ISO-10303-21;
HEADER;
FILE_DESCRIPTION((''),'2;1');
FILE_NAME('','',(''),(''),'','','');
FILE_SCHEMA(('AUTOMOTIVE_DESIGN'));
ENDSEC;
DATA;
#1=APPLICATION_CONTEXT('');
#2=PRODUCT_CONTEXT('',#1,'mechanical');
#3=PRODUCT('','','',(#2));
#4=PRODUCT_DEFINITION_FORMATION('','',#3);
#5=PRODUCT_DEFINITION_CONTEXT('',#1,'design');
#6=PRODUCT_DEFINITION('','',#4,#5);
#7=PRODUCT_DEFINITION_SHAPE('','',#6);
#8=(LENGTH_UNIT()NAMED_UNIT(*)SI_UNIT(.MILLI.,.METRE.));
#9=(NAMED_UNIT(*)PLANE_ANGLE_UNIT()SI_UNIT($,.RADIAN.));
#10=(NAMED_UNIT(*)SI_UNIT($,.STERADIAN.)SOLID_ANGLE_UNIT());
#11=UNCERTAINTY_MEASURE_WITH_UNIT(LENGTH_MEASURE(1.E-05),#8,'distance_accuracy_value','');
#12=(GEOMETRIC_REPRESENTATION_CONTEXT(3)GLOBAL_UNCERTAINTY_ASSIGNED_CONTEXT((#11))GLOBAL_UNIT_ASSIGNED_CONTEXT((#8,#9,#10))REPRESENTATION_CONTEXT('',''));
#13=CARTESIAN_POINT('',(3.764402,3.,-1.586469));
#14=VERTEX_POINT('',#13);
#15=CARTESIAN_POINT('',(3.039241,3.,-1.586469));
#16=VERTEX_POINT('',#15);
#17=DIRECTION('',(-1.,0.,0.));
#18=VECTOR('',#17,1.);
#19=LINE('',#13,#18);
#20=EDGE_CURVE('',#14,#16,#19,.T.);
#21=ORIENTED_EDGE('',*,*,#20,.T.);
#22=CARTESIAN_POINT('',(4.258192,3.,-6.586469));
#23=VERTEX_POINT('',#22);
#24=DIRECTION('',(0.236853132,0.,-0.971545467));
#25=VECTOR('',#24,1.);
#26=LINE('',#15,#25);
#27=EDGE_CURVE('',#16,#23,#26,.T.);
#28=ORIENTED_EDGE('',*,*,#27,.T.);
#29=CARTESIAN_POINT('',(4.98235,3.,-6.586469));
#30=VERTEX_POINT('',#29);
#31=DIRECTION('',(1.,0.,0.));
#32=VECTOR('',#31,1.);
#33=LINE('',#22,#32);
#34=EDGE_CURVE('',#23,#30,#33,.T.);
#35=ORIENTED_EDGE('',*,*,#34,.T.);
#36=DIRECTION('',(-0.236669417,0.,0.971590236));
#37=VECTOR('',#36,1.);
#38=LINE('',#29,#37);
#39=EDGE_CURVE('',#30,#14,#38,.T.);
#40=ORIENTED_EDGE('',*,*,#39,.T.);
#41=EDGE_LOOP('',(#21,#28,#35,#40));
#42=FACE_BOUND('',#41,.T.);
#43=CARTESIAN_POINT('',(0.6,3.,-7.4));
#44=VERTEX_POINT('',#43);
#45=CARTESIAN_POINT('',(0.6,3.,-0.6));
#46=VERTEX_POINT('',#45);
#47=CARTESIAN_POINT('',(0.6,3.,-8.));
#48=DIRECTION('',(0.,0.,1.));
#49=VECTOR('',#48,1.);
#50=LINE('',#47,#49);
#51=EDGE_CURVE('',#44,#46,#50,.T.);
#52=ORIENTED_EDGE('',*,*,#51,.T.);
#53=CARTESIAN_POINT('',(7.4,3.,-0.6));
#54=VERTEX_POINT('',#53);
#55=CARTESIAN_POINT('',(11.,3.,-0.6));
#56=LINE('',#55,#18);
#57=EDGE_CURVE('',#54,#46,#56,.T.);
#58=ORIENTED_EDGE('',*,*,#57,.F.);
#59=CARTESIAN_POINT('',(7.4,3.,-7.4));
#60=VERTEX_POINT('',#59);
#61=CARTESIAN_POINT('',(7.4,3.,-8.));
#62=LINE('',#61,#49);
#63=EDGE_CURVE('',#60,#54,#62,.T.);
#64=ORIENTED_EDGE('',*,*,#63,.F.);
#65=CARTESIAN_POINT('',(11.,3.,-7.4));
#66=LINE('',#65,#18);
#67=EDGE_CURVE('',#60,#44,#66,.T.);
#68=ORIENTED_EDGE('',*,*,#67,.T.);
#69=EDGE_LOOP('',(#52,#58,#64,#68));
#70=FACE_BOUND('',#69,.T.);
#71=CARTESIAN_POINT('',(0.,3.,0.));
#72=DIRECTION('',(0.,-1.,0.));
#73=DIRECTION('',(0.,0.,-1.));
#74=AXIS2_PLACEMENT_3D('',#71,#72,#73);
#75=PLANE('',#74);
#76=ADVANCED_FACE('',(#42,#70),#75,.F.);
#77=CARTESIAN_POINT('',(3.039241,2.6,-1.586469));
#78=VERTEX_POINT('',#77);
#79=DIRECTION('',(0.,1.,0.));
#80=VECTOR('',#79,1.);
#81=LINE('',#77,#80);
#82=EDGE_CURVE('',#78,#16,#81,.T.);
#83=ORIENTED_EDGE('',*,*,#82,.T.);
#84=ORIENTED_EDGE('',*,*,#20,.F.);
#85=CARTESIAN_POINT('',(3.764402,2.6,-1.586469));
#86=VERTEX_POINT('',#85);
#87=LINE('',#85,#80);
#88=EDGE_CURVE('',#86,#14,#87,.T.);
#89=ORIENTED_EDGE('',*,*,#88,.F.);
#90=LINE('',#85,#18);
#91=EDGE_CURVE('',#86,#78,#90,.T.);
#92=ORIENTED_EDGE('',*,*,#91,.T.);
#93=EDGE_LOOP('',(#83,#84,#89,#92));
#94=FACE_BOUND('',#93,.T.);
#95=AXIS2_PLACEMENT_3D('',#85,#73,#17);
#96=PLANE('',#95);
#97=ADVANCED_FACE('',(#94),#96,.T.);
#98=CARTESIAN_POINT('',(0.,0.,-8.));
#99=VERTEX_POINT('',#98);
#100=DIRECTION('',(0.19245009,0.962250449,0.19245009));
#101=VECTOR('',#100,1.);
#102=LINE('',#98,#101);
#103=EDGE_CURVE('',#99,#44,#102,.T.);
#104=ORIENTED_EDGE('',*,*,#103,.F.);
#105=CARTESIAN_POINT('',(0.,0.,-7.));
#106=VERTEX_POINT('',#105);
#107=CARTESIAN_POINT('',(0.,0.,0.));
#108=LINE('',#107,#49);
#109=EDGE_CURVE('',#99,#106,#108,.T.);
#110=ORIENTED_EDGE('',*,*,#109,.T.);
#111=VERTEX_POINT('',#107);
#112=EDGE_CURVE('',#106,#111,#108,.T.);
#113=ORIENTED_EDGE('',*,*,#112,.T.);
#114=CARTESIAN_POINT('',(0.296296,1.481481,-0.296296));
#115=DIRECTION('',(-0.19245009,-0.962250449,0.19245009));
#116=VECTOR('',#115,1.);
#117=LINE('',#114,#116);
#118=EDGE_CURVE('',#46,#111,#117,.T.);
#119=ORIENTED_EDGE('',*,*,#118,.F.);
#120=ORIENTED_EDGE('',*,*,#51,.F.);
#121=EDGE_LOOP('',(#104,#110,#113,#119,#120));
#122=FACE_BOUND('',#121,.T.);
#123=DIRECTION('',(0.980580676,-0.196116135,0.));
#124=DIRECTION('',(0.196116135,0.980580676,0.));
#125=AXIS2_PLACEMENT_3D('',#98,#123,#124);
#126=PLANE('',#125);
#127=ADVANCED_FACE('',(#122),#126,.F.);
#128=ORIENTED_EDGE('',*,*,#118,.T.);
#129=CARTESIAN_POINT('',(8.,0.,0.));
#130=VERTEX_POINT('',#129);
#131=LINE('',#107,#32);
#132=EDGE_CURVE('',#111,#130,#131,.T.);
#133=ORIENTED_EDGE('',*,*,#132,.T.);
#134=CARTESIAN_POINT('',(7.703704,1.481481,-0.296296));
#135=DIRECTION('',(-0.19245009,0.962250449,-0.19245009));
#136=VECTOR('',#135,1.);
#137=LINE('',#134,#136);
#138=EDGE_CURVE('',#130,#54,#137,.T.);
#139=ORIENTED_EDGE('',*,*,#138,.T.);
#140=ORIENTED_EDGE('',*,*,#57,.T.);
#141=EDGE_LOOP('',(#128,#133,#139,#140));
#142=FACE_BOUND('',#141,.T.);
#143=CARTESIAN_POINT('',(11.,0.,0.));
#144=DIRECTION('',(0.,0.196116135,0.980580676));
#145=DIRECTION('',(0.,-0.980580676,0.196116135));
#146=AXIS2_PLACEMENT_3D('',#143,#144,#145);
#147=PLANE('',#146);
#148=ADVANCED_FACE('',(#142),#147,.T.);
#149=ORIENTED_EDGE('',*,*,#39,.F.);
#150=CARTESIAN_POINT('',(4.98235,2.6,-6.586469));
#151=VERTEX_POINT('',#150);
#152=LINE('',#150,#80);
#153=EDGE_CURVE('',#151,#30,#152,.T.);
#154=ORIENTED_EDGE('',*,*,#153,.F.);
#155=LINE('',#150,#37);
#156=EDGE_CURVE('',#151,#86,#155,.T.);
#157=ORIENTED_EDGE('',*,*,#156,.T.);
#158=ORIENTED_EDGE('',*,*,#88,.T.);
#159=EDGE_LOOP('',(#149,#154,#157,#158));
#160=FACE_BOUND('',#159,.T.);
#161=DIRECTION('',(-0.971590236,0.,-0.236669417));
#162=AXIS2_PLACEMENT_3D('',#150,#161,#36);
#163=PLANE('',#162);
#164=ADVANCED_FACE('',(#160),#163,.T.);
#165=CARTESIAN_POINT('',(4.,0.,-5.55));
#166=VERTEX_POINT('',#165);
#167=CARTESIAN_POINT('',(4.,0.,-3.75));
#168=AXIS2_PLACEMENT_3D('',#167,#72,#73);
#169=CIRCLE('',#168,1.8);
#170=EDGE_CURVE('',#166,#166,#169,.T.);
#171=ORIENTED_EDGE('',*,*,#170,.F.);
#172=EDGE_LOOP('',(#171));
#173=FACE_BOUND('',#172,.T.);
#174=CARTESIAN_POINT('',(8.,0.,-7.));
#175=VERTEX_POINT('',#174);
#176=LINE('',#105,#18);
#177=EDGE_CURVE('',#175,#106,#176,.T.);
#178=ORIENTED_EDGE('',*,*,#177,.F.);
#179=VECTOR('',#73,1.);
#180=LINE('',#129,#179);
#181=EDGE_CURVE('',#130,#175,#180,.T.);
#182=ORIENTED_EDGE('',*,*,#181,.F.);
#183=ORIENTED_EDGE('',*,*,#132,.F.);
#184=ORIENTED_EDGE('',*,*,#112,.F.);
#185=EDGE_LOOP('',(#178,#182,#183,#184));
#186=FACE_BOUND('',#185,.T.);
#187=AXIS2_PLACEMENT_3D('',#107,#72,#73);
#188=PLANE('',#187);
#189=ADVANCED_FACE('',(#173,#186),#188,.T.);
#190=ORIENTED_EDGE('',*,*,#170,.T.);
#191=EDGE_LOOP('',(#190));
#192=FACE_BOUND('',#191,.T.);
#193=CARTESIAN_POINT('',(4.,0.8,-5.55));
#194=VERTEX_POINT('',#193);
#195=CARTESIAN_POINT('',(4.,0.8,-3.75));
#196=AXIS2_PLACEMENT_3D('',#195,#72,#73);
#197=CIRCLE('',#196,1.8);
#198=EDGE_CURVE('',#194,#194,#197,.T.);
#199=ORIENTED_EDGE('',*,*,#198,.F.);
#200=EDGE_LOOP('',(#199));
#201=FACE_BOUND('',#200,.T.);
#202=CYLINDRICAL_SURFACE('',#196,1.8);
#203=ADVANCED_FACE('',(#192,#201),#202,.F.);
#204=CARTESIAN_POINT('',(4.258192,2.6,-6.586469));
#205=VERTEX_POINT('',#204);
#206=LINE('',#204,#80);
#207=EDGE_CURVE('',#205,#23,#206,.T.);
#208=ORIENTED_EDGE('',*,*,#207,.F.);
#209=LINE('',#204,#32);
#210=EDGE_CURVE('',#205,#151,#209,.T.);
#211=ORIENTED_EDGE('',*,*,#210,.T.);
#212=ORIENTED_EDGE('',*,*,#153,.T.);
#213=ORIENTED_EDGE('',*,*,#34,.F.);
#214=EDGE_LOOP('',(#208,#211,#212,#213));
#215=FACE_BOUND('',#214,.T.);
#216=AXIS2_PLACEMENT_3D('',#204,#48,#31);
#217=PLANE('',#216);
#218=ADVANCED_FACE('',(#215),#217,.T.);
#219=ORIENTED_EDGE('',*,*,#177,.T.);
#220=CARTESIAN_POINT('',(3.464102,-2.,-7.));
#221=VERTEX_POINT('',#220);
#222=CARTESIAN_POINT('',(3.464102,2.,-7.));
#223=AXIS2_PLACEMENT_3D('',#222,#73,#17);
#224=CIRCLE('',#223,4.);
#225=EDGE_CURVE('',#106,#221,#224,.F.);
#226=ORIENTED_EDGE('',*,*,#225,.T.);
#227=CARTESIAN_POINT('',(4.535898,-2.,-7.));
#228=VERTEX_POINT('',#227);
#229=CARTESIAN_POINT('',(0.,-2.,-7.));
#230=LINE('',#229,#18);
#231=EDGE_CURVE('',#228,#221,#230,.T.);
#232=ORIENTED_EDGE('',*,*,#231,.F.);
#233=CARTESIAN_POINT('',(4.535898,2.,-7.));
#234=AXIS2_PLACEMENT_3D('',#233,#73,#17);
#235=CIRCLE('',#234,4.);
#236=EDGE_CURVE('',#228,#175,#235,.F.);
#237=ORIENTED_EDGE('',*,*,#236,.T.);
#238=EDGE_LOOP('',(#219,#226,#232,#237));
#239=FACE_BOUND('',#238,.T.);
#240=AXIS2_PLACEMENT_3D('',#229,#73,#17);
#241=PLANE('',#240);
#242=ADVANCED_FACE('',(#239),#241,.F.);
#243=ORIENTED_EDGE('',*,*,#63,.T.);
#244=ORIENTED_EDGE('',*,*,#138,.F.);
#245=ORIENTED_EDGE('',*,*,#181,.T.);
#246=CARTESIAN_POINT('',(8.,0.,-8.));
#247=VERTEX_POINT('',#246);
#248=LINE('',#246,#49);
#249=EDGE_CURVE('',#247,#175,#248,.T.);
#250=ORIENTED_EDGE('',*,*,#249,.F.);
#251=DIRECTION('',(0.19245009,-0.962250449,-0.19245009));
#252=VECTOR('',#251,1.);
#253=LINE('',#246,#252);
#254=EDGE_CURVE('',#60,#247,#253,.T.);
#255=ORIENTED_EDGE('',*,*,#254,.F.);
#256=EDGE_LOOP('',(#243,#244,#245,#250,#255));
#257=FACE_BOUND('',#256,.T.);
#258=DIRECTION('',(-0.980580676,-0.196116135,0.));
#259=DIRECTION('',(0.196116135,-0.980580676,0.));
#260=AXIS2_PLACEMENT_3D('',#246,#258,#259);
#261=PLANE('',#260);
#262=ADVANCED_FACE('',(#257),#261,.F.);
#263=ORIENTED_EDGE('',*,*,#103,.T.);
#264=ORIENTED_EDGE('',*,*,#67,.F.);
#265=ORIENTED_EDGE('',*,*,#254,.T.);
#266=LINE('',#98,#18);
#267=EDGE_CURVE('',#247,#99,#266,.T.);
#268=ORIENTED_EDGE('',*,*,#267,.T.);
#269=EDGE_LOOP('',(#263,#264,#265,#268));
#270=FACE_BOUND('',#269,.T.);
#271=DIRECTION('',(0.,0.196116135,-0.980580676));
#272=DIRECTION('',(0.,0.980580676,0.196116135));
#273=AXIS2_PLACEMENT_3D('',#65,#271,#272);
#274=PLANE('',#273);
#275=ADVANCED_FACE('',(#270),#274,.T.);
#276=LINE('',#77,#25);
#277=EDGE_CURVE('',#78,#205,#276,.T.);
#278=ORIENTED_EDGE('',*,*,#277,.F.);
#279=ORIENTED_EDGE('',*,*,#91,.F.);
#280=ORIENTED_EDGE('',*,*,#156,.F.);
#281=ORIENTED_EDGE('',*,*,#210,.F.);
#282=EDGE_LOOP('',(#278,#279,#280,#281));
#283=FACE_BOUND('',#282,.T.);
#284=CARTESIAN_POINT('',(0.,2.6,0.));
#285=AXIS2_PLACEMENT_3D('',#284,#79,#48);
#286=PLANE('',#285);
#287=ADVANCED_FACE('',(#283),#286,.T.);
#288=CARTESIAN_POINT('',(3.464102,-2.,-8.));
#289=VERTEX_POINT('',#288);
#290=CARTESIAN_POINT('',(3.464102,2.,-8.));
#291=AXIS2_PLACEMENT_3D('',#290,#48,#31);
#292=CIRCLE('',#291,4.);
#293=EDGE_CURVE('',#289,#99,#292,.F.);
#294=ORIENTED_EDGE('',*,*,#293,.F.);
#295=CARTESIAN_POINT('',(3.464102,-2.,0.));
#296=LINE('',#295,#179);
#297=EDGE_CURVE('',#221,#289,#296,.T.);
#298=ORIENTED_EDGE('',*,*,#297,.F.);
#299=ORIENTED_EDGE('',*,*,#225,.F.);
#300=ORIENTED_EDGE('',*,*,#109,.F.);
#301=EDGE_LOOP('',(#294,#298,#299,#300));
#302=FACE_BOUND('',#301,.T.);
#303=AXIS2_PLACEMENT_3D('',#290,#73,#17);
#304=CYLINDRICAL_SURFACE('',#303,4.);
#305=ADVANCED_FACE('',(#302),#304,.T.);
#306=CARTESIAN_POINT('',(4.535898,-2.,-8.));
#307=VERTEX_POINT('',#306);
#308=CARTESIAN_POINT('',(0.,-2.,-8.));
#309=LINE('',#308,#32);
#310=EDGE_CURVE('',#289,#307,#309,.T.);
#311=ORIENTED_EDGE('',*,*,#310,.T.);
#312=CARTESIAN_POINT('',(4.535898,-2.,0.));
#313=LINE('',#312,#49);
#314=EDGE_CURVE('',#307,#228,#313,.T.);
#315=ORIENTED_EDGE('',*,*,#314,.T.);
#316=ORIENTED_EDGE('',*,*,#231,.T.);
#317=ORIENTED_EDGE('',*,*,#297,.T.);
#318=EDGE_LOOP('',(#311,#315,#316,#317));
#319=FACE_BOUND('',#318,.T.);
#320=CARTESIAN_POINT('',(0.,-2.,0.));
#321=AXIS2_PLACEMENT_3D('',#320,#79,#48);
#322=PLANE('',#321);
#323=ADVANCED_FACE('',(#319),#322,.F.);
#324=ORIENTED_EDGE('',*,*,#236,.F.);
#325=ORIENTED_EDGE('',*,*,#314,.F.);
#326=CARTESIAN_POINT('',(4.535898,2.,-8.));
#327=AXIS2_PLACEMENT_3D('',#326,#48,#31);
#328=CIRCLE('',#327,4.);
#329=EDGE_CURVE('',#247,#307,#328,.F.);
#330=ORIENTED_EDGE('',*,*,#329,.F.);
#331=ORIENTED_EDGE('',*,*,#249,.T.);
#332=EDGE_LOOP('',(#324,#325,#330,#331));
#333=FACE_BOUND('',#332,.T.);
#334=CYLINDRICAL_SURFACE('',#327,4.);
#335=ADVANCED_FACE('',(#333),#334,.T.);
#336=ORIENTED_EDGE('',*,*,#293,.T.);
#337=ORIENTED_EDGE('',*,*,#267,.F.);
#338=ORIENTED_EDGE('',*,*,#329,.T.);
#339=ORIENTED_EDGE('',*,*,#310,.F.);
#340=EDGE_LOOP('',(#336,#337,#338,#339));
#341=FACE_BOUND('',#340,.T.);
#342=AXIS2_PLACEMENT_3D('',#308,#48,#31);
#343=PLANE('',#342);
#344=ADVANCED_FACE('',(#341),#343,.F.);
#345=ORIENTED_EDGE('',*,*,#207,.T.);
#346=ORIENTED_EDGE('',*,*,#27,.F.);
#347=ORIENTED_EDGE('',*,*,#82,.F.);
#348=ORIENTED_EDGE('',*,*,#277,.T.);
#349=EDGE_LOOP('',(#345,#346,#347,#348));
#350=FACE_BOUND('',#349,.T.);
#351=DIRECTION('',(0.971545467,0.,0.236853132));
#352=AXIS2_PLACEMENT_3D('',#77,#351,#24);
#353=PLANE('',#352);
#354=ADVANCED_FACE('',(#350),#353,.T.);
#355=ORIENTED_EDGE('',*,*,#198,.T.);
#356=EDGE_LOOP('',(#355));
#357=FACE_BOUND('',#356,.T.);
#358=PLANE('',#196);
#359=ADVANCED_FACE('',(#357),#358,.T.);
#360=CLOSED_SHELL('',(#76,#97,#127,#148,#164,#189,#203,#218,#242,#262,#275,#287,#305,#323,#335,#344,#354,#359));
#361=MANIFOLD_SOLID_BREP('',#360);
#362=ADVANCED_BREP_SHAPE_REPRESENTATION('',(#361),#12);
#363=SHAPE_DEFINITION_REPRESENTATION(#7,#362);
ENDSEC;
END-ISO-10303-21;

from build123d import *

# Parameters (mm, degrees)
SKETCH1_W               = 8
SKETCH1_H               = 8
BOSS_EXTRUDE1_DEPTH     = 3
CUT_EXTRUDE1_DEPTH      = 12.704699911
CUT_EXTRUDE1_DEPTH_BACK = 12.704699911
CUT_EXTRUDE2_DEPTH      = 11
SKETCH4_R               = 1.8
CUT_EXTRUDE3_DEPTH      = 0.8
SKETCH5_W               = 8
SKETCH5_H               = 1
BOSS_EXTRUDE2_DEPTH     = 2
FILLET1_R               = 4
CUT_EXTRUDE4_DEPTH      = 0.4


with BuildPart() as part:
    # Sketch1 → Boss-Extrude1 (new body)
    with BuildSketch(Plane(origin=(0, 0, 0), x_dir=(1, 0, 0), z_dir=(0, 1, 0))):
        with Locations((4, 4)):
            Rectangle(SKETCH1_W, SKETCH1_H)
    extrude(amount=BOSS_EXTRUDE1_DEPTH)

    # Sketch2 → Cut-Extrude1 (cut, two sides: drawn at the far end of the back side and taken through both)
    with BuildSketch(Plane.XY.offset(-CUT_EXTRUDE1_DEPTH_BACK)):
        Polygon((0, 0), (0.6, 3), (0, 3), align=None)
        Polygon((8, 0), (7.4, 3), (8, 3), align=None)
    extrude(amount=CUT_EXTRUDE1_DEPTH + CUT_EXTRUDE1_DEPTH_BACK, mode=Mode.SUBTRACT)

    # Sketch3 → Cut-Extrude2 (cut)
    with BuildSketch(Plane(origin=(0, 0, 0), x_dir=(0, 0, -1), z_dir=(1, 0, 0))):
        Polygon((0, 0), (0.6, 3), (0, 3), align=None)
        Polygon((8, 3), (7.4, 3), (8, 0), align=None)
    extrude(amount=CUT_EXTRUDE2_DEPTH, mode=Mode.SUBTRACT)

    # Sketch4 → Cut-Extrude3 (cut)
    with BuildSketch(Plane.XZ):
        with Locations(Location((4, -3.75, 0), (0, 0, 270))):
            Circle(SKETCH4_R)
    extrude(amount=-CUT_EXTRUDE3_DEPTH, mode=Mode.SUBTRACT)

    # Sketch5 → Boss-Extrude2 (add)
    with BuildSketch(Plane.XZ):
        with Locations((4, -7.5)):
            Rectangle(SKETCH5_W, SKETCH5_H)
    extrude(amount=BOSS_EXTRUDE2_DEPTH)

    # Fillet1
    # the kernel refuses this fillet: 4 mm, written as the material it takes off along each edge
    with BuildSketch(Plane(origin=(8, -2, -16.660254038), x_dir=(0, 1, 0), z_dir=(0, 0, 1)), Plane(origin=(0, -2, 1.660254038), x_dir=(0, 1, 0), z_dir=(0, 0, -1))) as fillet1_piece_1:
        with BuildLine():
            CenterArc((4, 3.464101615), FILLET1_R, 180, 60)
            Line((0, 3.464101615), (-0.08, 3.464101615))
            Line((-0.08, 3.464101615), (-0.08, 0))
            Line((-0.08, 0), (0, -0.08))
            ThreePointArc((0, -0.08), (1, -0.08), (1.96, -0.069282032))
            Line((1.96, -0.069282032), (2, 0))
        make_face()
    extrude(amount=18.320508076, mode=Mode.SUBTRACT)

    # Sketch6 → Cut-Extrude4 (cut)
    with BuildSketch(Plane(origin=(0, 3, 0), x_dir=(1, 0, 0), z_dir=(0, 1, 0))):
        Polygon((3.039241423, 1.586469201), (4.258191744, 6.586469201), (4.982350398, 6.586469201), (3.76440168, 1.586469201), align=None)
    extrude(amount=-CUT_EXTRUDE4_DEPTH, mode=Mode.SUBTRACT)


solid = part.part
